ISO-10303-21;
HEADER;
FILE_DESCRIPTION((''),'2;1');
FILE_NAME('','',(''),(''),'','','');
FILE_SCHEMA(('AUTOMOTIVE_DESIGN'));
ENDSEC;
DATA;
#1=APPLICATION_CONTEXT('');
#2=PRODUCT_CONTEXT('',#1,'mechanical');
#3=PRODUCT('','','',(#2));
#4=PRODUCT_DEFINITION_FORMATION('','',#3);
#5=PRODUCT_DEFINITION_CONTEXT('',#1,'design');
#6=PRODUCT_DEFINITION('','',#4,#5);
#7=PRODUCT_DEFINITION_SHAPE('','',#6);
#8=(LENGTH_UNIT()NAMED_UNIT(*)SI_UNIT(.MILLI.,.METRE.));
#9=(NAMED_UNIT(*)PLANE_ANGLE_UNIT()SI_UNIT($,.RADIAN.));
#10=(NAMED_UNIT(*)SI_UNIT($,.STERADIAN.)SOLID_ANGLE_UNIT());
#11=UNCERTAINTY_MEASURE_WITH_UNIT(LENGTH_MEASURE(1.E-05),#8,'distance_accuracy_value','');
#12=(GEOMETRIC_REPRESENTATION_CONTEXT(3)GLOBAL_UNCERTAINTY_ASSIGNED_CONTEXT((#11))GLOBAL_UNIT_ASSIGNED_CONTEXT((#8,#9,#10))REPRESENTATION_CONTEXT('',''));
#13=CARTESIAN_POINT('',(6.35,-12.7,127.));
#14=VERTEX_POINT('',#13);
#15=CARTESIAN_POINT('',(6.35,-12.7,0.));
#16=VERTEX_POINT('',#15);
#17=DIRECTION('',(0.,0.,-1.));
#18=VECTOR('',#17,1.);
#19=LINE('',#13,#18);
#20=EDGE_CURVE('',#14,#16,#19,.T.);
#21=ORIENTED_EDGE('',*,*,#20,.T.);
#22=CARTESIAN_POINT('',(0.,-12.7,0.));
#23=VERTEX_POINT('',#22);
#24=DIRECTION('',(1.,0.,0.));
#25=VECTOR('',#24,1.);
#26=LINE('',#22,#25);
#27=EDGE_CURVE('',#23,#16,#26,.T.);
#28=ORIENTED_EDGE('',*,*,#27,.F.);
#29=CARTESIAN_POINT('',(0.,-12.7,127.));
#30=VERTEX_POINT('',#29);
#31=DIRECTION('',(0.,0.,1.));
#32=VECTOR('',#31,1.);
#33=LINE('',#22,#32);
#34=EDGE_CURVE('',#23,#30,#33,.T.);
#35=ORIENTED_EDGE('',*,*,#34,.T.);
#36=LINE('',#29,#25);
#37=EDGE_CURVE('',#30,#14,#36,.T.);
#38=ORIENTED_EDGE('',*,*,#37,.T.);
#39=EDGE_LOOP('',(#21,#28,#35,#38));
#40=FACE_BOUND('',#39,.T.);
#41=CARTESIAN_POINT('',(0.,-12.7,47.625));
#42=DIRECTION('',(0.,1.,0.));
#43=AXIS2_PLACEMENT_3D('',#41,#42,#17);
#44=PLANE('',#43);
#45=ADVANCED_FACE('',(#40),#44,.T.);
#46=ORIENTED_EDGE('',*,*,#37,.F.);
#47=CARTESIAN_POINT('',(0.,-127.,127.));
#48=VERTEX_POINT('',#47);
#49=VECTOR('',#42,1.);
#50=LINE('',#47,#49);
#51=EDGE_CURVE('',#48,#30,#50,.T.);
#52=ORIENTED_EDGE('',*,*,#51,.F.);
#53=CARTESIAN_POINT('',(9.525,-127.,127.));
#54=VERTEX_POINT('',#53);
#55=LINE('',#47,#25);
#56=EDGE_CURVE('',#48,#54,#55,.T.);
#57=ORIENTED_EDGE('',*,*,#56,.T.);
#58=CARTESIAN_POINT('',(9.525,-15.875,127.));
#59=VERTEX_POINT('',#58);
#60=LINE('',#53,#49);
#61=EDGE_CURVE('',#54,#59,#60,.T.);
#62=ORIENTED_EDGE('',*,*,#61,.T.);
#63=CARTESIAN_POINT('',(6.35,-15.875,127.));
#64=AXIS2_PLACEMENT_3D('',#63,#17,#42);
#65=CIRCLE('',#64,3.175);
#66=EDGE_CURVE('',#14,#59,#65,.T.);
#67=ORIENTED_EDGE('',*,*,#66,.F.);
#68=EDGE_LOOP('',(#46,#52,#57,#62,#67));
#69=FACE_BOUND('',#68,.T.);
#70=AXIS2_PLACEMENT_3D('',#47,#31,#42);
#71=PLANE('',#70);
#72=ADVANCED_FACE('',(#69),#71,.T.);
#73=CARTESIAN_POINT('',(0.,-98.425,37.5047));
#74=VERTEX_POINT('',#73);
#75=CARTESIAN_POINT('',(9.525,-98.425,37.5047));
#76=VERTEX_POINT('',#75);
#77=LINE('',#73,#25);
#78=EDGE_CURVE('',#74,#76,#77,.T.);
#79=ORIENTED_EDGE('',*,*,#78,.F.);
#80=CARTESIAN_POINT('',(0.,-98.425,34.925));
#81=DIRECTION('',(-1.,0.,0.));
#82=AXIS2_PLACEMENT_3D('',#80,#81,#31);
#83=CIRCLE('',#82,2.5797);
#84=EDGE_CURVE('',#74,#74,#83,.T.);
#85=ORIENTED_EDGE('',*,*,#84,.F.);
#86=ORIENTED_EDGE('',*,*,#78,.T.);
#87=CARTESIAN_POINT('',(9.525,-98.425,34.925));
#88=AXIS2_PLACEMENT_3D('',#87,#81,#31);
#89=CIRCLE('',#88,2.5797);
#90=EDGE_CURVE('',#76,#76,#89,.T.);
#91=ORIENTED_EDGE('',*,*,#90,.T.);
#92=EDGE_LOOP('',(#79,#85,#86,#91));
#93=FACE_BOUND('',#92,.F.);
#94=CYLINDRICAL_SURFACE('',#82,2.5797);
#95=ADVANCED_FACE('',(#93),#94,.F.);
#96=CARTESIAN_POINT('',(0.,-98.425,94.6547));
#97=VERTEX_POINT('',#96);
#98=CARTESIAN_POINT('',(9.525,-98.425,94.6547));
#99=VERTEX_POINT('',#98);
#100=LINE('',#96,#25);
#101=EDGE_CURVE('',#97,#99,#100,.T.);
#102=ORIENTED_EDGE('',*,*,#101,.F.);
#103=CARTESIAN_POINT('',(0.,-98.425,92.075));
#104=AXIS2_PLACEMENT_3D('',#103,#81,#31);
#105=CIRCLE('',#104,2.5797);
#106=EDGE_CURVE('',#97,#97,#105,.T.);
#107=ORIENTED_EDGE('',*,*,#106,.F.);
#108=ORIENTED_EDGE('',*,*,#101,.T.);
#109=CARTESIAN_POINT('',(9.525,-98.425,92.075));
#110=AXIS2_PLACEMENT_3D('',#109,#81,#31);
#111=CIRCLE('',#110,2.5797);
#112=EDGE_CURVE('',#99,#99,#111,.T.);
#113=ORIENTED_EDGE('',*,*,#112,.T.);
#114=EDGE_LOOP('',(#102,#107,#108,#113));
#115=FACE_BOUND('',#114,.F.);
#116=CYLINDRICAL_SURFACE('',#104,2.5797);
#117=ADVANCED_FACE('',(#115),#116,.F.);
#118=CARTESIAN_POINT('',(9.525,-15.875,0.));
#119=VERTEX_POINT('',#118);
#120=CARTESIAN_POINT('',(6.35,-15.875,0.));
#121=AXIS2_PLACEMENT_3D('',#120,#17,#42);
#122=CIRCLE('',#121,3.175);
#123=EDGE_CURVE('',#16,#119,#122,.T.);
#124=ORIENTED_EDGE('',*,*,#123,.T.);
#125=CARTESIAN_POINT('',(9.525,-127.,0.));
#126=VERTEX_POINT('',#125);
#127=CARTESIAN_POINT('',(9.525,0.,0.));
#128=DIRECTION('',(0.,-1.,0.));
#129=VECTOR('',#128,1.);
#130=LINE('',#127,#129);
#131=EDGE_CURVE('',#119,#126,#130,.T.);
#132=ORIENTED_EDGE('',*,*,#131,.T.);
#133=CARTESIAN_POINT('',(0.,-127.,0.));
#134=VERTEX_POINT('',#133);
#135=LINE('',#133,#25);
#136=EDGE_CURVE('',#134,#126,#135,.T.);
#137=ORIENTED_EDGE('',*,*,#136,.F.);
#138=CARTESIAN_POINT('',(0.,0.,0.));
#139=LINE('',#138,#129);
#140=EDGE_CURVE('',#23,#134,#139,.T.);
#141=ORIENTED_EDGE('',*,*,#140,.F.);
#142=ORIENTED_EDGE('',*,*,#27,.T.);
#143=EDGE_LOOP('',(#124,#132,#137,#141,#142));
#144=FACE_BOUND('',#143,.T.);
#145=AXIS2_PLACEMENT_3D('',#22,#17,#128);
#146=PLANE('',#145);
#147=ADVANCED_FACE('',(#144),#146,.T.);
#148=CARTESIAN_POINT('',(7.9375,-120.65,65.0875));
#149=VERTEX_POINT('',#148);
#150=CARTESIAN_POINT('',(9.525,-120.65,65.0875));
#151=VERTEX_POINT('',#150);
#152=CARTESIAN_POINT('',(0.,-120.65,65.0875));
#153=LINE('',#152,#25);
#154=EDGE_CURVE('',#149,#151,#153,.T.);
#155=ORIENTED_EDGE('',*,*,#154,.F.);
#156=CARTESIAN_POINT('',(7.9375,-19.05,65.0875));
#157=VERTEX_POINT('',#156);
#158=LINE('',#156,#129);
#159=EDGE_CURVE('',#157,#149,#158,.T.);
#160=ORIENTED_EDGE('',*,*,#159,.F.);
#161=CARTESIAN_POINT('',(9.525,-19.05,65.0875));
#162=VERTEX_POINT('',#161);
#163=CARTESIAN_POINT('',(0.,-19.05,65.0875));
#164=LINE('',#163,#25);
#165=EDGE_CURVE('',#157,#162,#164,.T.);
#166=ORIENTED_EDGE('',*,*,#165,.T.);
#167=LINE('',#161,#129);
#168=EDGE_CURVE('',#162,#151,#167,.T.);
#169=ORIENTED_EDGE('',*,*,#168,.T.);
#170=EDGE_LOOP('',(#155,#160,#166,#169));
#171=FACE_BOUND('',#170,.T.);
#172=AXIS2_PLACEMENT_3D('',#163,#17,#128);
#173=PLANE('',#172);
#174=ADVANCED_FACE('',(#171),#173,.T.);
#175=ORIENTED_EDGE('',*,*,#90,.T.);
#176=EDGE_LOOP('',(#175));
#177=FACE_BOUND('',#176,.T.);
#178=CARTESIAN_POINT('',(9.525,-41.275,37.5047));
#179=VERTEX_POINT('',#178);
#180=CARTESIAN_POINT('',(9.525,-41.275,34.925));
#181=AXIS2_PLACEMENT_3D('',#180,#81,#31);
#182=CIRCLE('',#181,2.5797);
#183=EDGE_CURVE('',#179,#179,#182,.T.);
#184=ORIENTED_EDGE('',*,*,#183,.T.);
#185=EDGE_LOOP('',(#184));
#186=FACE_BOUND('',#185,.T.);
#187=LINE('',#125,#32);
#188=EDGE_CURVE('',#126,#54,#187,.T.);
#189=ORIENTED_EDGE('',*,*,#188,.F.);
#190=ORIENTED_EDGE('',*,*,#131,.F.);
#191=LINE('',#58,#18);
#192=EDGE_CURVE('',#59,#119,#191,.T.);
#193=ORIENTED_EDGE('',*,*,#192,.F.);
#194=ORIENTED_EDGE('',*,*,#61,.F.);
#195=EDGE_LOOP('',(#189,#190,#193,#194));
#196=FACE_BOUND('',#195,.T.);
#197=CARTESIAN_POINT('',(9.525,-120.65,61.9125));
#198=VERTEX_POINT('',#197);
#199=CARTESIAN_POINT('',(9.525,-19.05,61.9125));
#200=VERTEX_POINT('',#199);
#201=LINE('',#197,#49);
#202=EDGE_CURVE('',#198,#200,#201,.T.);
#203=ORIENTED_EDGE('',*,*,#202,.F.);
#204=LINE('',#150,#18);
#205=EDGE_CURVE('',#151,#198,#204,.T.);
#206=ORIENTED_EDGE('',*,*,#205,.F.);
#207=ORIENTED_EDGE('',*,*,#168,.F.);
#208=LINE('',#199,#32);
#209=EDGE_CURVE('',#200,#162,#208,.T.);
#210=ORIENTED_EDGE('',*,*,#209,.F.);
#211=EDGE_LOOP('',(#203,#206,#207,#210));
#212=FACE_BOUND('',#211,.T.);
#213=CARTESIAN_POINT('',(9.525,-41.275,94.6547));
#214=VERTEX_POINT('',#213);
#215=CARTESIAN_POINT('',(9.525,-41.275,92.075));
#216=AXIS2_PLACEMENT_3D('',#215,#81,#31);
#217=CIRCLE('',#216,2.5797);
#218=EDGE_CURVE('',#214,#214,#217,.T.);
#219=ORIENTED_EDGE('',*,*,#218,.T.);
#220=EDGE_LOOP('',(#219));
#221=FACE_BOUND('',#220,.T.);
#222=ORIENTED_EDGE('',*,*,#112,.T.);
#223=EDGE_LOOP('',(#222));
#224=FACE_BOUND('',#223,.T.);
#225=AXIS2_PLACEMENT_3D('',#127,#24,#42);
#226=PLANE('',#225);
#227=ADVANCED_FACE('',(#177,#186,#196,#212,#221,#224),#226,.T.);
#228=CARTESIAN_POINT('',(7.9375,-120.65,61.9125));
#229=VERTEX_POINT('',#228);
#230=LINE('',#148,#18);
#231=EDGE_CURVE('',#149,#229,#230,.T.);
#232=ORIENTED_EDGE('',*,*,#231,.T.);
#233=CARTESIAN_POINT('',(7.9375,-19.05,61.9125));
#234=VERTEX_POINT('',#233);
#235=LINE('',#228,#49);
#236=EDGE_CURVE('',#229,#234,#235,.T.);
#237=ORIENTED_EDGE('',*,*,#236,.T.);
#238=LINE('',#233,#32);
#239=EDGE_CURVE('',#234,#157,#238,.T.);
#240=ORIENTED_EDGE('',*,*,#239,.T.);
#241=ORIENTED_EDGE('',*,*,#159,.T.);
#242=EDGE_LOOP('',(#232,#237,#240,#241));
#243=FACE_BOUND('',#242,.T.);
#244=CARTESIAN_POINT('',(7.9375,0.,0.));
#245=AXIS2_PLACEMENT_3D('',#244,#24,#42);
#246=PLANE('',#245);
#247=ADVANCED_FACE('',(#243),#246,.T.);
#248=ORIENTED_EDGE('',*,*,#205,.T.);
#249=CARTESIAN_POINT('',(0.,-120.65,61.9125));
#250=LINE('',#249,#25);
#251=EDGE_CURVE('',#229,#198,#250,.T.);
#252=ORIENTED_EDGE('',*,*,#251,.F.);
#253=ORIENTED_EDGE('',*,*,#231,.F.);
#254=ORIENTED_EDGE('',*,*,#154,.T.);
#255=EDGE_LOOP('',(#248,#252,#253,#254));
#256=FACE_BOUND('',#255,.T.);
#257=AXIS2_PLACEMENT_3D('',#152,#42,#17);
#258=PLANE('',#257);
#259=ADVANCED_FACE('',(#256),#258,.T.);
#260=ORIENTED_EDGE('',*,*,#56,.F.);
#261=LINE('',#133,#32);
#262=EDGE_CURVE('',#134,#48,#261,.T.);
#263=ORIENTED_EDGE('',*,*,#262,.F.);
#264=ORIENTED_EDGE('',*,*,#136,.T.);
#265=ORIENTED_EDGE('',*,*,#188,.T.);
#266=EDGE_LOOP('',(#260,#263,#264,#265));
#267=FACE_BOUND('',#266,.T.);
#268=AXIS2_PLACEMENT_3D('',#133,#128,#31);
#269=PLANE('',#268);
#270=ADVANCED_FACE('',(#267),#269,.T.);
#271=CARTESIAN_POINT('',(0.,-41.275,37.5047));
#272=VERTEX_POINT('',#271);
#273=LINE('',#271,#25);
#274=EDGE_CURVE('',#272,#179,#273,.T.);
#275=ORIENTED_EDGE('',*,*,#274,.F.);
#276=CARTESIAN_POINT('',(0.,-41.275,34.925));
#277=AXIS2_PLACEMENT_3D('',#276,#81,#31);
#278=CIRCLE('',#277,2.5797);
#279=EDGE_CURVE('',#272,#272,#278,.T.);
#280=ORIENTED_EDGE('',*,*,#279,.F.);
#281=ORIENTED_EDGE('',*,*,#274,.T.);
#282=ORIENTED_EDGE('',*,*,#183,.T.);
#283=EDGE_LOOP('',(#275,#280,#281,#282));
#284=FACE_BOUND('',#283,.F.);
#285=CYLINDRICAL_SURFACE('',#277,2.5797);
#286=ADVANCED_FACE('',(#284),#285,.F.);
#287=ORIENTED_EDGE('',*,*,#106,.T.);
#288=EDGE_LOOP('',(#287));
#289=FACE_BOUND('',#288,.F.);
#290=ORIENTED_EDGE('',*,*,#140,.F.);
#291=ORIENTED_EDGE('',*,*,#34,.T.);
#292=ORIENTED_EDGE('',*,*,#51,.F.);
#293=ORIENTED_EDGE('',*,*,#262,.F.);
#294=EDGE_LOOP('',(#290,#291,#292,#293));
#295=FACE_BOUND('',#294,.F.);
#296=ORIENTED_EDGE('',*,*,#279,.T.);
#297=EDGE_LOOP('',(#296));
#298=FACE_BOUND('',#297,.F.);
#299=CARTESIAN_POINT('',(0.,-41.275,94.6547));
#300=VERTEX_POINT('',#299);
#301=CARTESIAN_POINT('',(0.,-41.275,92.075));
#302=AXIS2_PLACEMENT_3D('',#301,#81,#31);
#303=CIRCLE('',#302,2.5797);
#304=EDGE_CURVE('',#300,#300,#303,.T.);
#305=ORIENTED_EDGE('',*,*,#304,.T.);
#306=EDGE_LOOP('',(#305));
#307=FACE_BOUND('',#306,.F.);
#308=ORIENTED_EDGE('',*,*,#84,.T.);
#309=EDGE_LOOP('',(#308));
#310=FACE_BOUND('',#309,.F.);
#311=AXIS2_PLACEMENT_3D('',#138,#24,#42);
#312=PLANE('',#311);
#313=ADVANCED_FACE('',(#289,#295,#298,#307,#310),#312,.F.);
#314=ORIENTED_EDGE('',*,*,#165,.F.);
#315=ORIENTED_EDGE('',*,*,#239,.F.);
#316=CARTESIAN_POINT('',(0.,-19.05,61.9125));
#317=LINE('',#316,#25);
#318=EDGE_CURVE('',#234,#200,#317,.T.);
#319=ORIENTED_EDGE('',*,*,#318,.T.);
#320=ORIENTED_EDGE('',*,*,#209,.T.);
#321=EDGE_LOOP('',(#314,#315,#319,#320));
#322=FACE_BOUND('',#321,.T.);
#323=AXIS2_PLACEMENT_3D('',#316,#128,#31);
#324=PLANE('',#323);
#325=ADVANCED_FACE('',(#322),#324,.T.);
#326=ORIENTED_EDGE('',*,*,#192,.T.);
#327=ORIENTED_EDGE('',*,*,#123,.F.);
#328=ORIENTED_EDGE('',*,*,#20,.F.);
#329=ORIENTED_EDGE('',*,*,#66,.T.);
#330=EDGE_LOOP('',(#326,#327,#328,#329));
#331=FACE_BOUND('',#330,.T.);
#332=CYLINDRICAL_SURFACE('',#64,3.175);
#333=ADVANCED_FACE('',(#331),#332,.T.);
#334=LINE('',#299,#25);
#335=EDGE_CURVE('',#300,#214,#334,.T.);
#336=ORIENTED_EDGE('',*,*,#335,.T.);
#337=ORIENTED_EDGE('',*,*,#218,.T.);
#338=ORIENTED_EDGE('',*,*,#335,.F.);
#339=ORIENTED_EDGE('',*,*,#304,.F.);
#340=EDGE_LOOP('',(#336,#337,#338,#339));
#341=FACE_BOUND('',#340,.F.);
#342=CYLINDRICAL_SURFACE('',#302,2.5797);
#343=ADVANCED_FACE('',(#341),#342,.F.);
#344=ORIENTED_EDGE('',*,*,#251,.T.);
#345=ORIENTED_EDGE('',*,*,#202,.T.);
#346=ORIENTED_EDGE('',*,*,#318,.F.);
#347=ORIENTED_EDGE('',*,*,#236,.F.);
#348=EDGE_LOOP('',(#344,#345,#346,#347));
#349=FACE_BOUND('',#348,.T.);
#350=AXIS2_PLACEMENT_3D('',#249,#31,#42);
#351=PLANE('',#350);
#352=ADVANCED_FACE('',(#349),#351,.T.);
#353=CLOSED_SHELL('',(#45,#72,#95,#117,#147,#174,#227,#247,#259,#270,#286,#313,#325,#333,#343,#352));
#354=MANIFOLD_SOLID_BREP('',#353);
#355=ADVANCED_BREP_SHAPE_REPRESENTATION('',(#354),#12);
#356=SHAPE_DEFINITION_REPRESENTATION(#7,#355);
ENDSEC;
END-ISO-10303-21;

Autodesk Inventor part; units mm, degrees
ref_plane "YZ Plane" through (0, 0, 0) normal (1, 0, 0) x (0, 1, 0)
ref_plane "XZ Plane" through (0, 0, 0) normal (0, 1, 0) x (-1, 0, 0)
ref_plane "XY Plane" through (0, 0, 0) normal (0, 0, 1) x (1, 0, 0)
sketch "Sketch1" plane through (0, 0, 0) normal (1, 0, 0) x (0, 1, 0)
  line L0 (0, 0) -> (-127, 0)
  line L1 (-127, 0) -> (-127, 127)
  line L2 (-127, 127) -> (0, 127)
  line L3 (0, 127) -> (0, 0)
  line L4 (-19.05, 65.0875) -> (-120.65, 65.0875)
  line L5 (-120.65, 65.0875) -> (-120.65, 61.9125)
  line L6 (-120.65, 61.9125) -> (-19.05, 61.9125)
  line L7 (-19.05, 61.9125) -> (-19.05, 65.0875)
  line L8 (0, 47.625) -> (-12.7, 47.625)
  line L9 (-12.7, 47.625) -> (-12.7, 79.375)
  line L10 (-12.7, 79.375) -> (0, 79.375)
  line L11 (0, 79.375) -> (0, 47.625)
  line L12 (-12.7, 47.625) -> (-12.7, 0)
  line L13 (-12.7, 79.375) -> (-12.7, 127)
  dimension "d0" = 127
  dimension "d1" = 127
  dimension "d2" = 6.35
  dimension "d4" = 3.175
  dimension "d5" = 61.9125
  dimension "d25" = 12.7
  dimension "d26" = 31.75
  dimension "d27" = 47.625
  dimension "d28" = 6.35
extrude "Extrusion1" add sketch "Sketch1" along normal blind 9.525 contours L0 L1 L2 L13 L9 L12
extrude "Extrusion2" add sketch "Sketch1" along normal blind 7.9375 contours L7 L6 L5 L4
sketch "Sketch3" plane through (0, 0, 0) normal (-1, 0, 0) x (0, 0, 1)
  circle A0 centre (34.925, -41.275) radius 2.5797
  line L0 (0, -127) -> (0, -12.7) projected
  line L1 (0, -12.7) -> (0, 0)
  line L2 (0, 0) -> (20.4302, 0)
  line L3 (20.4302, 0) -> (0, -12.7)
  circle A1 centre (34.925, -98.425) radius 2.5797
  circle A2 centre (92.075, -41.275) radius 2.5797
  circle A3 centre (92.075, -98.425) radius 2.5797
  line L4 (0, -12.7) -> (127, -12.7) projected
  dimension "d31" = 57.15
  dimension "d34" = 57.15
  dimension "d37" = 34.925
  dimension "d38" = 28.575
  dimension "d39" = 5.1594
extrude "Extrusion4" cut sketch "Sketch3" against normal through all contours A0 | A1 | A2 | A3
fillet "Fillet5" radius 3.175 1 edges at (9.525, -12.7, 63.5)
equation "\"d5\" = -0.5 * d4 + 0.5 * d1"
equation "\"d27\" = -0.5 * d26 + 0.5 * d1"
equation "\"d28\" = d2"
properties part number "Gripper plate"
